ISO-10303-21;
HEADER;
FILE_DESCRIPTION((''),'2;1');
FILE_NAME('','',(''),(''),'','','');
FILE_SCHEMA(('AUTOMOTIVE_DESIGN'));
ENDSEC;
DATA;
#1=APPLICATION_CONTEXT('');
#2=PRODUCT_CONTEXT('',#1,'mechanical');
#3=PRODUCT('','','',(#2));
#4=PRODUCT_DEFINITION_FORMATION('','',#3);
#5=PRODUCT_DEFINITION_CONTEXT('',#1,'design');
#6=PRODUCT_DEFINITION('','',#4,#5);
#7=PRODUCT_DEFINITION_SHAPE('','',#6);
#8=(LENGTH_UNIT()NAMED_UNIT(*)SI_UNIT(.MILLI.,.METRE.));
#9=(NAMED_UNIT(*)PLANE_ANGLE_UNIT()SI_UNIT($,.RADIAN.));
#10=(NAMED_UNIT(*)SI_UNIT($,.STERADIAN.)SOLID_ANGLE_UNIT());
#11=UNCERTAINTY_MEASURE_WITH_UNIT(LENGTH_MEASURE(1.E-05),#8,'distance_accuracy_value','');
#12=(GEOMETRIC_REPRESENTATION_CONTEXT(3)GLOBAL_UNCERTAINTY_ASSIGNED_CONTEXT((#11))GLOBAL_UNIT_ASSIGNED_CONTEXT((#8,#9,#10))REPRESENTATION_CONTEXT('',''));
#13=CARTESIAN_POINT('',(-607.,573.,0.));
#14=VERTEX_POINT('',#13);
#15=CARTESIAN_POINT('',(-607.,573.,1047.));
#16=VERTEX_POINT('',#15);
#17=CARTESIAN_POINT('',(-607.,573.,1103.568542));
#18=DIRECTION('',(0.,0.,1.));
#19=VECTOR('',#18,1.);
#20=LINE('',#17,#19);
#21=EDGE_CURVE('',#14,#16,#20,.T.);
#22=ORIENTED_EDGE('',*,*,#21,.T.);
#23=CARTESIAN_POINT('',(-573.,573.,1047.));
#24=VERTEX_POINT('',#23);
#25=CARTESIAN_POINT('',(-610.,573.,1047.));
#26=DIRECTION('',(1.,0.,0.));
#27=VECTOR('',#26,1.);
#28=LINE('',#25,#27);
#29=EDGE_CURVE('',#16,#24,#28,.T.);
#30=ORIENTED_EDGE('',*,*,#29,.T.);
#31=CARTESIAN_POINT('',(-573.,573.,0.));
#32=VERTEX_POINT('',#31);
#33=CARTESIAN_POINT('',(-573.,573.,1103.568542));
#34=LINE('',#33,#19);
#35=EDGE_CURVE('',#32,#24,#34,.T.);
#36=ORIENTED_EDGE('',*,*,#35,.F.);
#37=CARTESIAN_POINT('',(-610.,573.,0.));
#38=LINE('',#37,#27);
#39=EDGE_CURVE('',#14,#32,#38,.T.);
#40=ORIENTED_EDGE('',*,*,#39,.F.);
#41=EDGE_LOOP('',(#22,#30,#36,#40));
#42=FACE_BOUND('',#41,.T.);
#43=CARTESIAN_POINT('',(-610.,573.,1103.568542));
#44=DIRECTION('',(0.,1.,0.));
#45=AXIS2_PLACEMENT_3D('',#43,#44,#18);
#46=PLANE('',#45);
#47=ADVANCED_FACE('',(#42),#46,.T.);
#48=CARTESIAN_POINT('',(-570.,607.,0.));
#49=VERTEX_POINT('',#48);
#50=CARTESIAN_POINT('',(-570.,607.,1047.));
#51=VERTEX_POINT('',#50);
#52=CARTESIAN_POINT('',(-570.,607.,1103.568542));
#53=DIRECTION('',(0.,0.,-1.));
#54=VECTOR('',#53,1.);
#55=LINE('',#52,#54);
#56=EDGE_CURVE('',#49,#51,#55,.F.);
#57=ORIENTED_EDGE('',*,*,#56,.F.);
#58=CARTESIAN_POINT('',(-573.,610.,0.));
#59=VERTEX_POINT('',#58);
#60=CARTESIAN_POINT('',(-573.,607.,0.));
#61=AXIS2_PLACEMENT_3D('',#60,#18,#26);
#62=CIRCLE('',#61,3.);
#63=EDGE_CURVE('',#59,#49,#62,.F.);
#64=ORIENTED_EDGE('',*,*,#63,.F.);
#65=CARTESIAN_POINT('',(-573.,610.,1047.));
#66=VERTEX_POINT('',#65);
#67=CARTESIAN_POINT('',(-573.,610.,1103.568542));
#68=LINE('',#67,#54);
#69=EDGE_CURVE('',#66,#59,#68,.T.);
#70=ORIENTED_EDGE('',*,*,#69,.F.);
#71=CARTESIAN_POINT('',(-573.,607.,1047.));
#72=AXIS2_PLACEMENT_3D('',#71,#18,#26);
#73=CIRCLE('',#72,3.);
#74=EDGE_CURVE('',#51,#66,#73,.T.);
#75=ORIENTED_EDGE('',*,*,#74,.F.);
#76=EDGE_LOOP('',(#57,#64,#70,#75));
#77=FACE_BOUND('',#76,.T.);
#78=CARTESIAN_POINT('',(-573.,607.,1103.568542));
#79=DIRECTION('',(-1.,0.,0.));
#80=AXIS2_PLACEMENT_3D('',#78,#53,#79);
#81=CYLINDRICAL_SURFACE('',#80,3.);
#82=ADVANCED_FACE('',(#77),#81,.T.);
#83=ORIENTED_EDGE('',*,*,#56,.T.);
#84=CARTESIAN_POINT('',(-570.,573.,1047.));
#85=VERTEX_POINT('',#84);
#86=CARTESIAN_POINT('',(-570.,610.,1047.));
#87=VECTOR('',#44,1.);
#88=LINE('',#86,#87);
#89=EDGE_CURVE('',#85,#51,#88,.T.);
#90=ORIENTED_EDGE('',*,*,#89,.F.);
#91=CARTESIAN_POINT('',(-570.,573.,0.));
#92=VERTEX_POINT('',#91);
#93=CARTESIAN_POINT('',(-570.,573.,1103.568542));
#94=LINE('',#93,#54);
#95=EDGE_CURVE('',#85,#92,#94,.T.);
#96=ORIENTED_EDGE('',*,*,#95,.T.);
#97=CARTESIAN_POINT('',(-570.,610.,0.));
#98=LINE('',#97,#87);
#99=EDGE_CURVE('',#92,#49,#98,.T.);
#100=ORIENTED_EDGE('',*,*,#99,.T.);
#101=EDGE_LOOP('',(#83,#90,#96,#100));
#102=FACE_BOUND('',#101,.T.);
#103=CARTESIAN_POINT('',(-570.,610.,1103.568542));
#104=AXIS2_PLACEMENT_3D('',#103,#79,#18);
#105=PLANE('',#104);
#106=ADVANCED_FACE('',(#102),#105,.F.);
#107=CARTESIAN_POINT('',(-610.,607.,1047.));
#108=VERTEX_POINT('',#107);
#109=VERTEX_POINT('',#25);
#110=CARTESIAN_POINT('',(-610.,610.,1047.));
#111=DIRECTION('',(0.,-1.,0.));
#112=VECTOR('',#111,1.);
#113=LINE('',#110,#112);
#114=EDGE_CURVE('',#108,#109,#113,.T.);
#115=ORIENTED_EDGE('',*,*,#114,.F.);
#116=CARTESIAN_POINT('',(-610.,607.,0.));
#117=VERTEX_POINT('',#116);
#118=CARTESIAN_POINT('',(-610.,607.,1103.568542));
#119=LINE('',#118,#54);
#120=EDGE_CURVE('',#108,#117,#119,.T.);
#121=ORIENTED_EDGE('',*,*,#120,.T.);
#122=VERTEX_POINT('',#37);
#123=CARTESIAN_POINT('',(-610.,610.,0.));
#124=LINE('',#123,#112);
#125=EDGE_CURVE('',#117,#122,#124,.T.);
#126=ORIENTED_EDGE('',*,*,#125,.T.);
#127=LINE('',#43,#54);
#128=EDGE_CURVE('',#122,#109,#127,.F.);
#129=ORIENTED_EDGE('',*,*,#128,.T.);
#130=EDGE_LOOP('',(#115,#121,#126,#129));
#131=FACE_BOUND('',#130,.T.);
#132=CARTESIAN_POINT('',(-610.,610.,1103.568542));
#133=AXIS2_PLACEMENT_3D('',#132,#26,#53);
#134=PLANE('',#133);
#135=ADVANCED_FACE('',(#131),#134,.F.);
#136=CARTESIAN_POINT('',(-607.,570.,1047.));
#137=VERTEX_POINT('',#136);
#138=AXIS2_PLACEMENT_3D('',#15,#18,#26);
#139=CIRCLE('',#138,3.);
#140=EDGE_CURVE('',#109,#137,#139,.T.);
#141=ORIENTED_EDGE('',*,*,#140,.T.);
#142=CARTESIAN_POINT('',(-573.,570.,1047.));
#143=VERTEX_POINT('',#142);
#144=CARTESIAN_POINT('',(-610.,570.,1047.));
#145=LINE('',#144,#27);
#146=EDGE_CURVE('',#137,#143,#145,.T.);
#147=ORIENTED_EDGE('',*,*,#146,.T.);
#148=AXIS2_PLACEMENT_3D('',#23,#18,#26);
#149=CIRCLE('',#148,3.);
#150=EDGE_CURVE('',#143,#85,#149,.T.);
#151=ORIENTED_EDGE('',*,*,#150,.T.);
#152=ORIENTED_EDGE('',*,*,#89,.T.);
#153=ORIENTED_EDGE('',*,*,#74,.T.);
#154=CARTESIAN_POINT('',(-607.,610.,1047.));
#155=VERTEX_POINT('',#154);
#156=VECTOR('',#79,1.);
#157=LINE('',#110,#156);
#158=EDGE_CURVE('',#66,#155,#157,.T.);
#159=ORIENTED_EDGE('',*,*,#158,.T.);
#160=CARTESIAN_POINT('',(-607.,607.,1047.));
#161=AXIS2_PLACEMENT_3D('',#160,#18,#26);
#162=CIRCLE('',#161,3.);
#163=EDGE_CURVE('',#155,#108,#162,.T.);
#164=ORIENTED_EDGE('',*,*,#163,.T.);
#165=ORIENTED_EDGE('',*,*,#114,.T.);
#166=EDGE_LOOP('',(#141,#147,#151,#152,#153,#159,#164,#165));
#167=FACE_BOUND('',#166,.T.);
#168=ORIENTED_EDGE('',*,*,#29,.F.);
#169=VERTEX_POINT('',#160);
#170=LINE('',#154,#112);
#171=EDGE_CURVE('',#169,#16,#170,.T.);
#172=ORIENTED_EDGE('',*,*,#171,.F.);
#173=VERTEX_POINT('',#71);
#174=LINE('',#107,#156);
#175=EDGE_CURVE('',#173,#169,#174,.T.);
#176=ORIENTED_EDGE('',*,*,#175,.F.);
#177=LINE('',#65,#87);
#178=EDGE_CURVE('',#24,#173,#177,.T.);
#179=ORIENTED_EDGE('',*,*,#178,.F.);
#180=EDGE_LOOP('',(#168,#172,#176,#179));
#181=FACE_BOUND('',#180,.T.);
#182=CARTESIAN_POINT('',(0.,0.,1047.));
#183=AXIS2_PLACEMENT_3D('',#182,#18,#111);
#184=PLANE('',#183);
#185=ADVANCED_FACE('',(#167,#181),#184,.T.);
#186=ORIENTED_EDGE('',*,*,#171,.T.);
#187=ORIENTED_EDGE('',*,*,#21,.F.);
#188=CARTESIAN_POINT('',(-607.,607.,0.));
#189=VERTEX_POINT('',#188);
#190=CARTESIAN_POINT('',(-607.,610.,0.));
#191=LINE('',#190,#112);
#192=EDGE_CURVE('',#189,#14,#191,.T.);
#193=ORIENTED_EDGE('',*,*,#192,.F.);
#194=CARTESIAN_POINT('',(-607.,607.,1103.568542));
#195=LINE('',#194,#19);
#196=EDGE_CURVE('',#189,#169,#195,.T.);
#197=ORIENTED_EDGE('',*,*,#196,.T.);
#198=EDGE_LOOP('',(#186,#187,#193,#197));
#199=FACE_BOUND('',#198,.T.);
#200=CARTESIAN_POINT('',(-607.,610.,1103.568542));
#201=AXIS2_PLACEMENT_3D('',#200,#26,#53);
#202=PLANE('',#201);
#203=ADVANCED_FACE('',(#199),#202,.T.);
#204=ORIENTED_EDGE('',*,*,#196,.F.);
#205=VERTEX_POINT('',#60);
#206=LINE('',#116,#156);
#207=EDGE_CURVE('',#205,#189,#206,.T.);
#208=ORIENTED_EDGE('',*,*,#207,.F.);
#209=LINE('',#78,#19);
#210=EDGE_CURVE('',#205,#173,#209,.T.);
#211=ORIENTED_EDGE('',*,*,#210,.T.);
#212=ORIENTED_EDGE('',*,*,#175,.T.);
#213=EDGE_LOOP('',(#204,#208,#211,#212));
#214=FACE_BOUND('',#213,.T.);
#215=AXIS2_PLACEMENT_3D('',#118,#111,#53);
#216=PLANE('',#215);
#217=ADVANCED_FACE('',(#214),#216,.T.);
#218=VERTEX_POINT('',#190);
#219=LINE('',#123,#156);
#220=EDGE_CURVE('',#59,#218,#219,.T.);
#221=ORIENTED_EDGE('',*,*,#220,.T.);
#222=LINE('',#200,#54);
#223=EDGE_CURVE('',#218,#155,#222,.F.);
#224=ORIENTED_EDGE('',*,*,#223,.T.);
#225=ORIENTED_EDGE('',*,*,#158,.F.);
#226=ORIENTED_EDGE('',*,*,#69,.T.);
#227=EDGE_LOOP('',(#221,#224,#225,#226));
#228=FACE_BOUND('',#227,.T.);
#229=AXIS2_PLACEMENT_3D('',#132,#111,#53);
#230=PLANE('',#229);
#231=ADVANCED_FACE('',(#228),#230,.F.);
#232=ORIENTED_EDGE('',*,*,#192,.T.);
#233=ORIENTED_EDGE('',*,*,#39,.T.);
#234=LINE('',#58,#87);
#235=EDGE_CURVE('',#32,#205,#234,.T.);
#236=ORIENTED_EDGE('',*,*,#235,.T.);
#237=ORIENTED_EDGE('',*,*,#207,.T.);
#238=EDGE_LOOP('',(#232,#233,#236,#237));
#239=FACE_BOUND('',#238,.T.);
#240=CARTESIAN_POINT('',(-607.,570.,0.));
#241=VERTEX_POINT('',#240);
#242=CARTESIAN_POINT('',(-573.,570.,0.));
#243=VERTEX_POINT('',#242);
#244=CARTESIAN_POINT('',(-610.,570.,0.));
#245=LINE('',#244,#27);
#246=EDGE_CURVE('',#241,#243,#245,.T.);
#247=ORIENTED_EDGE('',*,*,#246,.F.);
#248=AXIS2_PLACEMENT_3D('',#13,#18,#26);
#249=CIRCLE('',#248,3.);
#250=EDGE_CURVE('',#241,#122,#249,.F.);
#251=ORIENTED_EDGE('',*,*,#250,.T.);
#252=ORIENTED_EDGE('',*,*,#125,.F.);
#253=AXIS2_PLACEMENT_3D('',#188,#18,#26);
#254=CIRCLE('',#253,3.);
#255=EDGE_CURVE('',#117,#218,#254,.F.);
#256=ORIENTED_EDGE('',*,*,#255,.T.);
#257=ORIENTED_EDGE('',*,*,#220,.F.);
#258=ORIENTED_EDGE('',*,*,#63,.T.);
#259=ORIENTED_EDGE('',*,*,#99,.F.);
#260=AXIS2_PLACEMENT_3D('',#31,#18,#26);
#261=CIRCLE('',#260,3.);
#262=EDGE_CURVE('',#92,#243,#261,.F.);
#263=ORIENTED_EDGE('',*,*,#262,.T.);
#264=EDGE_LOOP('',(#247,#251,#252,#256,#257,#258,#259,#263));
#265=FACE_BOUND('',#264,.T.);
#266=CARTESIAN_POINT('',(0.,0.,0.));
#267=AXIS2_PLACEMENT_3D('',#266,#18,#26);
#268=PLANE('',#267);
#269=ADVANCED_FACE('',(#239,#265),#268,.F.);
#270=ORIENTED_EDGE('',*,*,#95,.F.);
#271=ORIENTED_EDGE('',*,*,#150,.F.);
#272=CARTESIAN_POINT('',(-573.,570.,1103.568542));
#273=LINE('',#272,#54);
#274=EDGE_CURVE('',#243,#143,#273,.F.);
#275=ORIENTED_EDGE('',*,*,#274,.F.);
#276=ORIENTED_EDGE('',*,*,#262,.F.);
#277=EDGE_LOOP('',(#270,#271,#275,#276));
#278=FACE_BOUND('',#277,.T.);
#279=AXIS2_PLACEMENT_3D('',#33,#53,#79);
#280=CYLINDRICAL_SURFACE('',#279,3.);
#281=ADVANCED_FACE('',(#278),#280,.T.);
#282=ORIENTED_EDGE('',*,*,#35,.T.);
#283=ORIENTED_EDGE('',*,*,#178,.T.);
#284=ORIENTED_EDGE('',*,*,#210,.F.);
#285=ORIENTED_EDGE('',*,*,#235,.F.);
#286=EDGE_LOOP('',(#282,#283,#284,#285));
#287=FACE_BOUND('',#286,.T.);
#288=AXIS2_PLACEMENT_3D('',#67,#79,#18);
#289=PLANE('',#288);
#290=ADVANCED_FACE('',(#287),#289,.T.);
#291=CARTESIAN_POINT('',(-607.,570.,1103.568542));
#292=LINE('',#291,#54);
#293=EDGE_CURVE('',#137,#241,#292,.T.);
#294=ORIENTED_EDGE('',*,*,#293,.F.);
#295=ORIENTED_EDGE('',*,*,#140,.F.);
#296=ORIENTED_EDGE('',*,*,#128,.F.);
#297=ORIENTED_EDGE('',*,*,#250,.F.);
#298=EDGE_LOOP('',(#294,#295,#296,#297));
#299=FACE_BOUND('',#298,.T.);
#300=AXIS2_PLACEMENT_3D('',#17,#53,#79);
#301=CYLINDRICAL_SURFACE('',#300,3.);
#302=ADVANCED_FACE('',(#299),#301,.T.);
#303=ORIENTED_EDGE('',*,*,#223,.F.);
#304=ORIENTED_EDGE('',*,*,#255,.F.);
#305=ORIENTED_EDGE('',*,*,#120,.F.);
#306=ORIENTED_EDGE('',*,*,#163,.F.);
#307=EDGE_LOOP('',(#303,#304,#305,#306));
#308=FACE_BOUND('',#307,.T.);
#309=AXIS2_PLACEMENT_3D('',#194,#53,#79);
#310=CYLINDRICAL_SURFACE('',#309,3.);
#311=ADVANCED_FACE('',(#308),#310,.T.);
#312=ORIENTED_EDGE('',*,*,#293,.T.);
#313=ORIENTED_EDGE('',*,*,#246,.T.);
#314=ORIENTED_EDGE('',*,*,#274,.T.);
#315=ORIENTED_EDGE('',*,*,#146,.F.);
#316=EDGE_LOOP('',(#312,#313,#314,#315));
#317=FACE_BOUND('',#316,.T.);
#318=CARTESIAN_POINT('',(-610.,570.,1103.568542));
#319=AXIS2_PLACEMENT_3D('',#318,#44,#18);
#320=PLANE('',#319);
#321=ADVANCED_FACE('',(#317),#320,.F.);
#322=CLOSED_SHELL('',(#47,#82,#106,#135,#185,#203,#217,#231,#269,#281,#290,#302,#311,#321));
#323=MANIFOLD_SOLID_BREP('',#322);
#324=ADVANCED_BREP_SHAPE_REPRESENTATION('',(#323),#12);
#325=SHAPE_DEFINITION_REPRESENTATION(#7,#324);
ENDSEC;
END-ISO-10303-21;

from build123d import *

# Parameters (mm, degrees)
SKETCH1_W           = 40
SKETCH1_H           = 40
BOSS_EXTRUDE1_DEPTH = 1047
FILLET1_R           = 3
SHELL1_START        = -607
SHELL1_OUTLINE_W    = 34
SHELL1_OUTLINE_H    = 1047
SHELL1_DEPTH        = 34


# Read off the part's stored shape, not the designer's step: Shell1
with BuildPart() as part:
    # Sketch1 → Boss-Extrude1 (new body)
    with BuildSketch(Plane.XY):
        with Locations((-590, 590)):
            Rectangle(SKETCH1_W, SKETCH1_H)
    extrude(amount=BOSS_EXTRUDE1_DEPTH)

    # Fillet1
    fillet1_edges = [part.edges().sort_by_distance(p)[0] for p in [
        (-610, 570, 523.5),
        (-570, 570, 523.5),
        (-570, 610, 523.5),
        (-610, 610, 523.5),
    ]]
    fillet(fillet1_edges, radius=FILLET1_R)

    # Shell1 outline → Shell1 (cut)
    with BuildSketch(Plane.YZ.offset(SHELL1_START)):
        with Locations((590, 523.5)):
            Rectangle(SHELL1_OUTLINE_W, SHELL1_OUTLINE_H)
    extrude(amount=SHELL1_DEPTH, mode=Mode.SUBTRACT)


solid = part.part
